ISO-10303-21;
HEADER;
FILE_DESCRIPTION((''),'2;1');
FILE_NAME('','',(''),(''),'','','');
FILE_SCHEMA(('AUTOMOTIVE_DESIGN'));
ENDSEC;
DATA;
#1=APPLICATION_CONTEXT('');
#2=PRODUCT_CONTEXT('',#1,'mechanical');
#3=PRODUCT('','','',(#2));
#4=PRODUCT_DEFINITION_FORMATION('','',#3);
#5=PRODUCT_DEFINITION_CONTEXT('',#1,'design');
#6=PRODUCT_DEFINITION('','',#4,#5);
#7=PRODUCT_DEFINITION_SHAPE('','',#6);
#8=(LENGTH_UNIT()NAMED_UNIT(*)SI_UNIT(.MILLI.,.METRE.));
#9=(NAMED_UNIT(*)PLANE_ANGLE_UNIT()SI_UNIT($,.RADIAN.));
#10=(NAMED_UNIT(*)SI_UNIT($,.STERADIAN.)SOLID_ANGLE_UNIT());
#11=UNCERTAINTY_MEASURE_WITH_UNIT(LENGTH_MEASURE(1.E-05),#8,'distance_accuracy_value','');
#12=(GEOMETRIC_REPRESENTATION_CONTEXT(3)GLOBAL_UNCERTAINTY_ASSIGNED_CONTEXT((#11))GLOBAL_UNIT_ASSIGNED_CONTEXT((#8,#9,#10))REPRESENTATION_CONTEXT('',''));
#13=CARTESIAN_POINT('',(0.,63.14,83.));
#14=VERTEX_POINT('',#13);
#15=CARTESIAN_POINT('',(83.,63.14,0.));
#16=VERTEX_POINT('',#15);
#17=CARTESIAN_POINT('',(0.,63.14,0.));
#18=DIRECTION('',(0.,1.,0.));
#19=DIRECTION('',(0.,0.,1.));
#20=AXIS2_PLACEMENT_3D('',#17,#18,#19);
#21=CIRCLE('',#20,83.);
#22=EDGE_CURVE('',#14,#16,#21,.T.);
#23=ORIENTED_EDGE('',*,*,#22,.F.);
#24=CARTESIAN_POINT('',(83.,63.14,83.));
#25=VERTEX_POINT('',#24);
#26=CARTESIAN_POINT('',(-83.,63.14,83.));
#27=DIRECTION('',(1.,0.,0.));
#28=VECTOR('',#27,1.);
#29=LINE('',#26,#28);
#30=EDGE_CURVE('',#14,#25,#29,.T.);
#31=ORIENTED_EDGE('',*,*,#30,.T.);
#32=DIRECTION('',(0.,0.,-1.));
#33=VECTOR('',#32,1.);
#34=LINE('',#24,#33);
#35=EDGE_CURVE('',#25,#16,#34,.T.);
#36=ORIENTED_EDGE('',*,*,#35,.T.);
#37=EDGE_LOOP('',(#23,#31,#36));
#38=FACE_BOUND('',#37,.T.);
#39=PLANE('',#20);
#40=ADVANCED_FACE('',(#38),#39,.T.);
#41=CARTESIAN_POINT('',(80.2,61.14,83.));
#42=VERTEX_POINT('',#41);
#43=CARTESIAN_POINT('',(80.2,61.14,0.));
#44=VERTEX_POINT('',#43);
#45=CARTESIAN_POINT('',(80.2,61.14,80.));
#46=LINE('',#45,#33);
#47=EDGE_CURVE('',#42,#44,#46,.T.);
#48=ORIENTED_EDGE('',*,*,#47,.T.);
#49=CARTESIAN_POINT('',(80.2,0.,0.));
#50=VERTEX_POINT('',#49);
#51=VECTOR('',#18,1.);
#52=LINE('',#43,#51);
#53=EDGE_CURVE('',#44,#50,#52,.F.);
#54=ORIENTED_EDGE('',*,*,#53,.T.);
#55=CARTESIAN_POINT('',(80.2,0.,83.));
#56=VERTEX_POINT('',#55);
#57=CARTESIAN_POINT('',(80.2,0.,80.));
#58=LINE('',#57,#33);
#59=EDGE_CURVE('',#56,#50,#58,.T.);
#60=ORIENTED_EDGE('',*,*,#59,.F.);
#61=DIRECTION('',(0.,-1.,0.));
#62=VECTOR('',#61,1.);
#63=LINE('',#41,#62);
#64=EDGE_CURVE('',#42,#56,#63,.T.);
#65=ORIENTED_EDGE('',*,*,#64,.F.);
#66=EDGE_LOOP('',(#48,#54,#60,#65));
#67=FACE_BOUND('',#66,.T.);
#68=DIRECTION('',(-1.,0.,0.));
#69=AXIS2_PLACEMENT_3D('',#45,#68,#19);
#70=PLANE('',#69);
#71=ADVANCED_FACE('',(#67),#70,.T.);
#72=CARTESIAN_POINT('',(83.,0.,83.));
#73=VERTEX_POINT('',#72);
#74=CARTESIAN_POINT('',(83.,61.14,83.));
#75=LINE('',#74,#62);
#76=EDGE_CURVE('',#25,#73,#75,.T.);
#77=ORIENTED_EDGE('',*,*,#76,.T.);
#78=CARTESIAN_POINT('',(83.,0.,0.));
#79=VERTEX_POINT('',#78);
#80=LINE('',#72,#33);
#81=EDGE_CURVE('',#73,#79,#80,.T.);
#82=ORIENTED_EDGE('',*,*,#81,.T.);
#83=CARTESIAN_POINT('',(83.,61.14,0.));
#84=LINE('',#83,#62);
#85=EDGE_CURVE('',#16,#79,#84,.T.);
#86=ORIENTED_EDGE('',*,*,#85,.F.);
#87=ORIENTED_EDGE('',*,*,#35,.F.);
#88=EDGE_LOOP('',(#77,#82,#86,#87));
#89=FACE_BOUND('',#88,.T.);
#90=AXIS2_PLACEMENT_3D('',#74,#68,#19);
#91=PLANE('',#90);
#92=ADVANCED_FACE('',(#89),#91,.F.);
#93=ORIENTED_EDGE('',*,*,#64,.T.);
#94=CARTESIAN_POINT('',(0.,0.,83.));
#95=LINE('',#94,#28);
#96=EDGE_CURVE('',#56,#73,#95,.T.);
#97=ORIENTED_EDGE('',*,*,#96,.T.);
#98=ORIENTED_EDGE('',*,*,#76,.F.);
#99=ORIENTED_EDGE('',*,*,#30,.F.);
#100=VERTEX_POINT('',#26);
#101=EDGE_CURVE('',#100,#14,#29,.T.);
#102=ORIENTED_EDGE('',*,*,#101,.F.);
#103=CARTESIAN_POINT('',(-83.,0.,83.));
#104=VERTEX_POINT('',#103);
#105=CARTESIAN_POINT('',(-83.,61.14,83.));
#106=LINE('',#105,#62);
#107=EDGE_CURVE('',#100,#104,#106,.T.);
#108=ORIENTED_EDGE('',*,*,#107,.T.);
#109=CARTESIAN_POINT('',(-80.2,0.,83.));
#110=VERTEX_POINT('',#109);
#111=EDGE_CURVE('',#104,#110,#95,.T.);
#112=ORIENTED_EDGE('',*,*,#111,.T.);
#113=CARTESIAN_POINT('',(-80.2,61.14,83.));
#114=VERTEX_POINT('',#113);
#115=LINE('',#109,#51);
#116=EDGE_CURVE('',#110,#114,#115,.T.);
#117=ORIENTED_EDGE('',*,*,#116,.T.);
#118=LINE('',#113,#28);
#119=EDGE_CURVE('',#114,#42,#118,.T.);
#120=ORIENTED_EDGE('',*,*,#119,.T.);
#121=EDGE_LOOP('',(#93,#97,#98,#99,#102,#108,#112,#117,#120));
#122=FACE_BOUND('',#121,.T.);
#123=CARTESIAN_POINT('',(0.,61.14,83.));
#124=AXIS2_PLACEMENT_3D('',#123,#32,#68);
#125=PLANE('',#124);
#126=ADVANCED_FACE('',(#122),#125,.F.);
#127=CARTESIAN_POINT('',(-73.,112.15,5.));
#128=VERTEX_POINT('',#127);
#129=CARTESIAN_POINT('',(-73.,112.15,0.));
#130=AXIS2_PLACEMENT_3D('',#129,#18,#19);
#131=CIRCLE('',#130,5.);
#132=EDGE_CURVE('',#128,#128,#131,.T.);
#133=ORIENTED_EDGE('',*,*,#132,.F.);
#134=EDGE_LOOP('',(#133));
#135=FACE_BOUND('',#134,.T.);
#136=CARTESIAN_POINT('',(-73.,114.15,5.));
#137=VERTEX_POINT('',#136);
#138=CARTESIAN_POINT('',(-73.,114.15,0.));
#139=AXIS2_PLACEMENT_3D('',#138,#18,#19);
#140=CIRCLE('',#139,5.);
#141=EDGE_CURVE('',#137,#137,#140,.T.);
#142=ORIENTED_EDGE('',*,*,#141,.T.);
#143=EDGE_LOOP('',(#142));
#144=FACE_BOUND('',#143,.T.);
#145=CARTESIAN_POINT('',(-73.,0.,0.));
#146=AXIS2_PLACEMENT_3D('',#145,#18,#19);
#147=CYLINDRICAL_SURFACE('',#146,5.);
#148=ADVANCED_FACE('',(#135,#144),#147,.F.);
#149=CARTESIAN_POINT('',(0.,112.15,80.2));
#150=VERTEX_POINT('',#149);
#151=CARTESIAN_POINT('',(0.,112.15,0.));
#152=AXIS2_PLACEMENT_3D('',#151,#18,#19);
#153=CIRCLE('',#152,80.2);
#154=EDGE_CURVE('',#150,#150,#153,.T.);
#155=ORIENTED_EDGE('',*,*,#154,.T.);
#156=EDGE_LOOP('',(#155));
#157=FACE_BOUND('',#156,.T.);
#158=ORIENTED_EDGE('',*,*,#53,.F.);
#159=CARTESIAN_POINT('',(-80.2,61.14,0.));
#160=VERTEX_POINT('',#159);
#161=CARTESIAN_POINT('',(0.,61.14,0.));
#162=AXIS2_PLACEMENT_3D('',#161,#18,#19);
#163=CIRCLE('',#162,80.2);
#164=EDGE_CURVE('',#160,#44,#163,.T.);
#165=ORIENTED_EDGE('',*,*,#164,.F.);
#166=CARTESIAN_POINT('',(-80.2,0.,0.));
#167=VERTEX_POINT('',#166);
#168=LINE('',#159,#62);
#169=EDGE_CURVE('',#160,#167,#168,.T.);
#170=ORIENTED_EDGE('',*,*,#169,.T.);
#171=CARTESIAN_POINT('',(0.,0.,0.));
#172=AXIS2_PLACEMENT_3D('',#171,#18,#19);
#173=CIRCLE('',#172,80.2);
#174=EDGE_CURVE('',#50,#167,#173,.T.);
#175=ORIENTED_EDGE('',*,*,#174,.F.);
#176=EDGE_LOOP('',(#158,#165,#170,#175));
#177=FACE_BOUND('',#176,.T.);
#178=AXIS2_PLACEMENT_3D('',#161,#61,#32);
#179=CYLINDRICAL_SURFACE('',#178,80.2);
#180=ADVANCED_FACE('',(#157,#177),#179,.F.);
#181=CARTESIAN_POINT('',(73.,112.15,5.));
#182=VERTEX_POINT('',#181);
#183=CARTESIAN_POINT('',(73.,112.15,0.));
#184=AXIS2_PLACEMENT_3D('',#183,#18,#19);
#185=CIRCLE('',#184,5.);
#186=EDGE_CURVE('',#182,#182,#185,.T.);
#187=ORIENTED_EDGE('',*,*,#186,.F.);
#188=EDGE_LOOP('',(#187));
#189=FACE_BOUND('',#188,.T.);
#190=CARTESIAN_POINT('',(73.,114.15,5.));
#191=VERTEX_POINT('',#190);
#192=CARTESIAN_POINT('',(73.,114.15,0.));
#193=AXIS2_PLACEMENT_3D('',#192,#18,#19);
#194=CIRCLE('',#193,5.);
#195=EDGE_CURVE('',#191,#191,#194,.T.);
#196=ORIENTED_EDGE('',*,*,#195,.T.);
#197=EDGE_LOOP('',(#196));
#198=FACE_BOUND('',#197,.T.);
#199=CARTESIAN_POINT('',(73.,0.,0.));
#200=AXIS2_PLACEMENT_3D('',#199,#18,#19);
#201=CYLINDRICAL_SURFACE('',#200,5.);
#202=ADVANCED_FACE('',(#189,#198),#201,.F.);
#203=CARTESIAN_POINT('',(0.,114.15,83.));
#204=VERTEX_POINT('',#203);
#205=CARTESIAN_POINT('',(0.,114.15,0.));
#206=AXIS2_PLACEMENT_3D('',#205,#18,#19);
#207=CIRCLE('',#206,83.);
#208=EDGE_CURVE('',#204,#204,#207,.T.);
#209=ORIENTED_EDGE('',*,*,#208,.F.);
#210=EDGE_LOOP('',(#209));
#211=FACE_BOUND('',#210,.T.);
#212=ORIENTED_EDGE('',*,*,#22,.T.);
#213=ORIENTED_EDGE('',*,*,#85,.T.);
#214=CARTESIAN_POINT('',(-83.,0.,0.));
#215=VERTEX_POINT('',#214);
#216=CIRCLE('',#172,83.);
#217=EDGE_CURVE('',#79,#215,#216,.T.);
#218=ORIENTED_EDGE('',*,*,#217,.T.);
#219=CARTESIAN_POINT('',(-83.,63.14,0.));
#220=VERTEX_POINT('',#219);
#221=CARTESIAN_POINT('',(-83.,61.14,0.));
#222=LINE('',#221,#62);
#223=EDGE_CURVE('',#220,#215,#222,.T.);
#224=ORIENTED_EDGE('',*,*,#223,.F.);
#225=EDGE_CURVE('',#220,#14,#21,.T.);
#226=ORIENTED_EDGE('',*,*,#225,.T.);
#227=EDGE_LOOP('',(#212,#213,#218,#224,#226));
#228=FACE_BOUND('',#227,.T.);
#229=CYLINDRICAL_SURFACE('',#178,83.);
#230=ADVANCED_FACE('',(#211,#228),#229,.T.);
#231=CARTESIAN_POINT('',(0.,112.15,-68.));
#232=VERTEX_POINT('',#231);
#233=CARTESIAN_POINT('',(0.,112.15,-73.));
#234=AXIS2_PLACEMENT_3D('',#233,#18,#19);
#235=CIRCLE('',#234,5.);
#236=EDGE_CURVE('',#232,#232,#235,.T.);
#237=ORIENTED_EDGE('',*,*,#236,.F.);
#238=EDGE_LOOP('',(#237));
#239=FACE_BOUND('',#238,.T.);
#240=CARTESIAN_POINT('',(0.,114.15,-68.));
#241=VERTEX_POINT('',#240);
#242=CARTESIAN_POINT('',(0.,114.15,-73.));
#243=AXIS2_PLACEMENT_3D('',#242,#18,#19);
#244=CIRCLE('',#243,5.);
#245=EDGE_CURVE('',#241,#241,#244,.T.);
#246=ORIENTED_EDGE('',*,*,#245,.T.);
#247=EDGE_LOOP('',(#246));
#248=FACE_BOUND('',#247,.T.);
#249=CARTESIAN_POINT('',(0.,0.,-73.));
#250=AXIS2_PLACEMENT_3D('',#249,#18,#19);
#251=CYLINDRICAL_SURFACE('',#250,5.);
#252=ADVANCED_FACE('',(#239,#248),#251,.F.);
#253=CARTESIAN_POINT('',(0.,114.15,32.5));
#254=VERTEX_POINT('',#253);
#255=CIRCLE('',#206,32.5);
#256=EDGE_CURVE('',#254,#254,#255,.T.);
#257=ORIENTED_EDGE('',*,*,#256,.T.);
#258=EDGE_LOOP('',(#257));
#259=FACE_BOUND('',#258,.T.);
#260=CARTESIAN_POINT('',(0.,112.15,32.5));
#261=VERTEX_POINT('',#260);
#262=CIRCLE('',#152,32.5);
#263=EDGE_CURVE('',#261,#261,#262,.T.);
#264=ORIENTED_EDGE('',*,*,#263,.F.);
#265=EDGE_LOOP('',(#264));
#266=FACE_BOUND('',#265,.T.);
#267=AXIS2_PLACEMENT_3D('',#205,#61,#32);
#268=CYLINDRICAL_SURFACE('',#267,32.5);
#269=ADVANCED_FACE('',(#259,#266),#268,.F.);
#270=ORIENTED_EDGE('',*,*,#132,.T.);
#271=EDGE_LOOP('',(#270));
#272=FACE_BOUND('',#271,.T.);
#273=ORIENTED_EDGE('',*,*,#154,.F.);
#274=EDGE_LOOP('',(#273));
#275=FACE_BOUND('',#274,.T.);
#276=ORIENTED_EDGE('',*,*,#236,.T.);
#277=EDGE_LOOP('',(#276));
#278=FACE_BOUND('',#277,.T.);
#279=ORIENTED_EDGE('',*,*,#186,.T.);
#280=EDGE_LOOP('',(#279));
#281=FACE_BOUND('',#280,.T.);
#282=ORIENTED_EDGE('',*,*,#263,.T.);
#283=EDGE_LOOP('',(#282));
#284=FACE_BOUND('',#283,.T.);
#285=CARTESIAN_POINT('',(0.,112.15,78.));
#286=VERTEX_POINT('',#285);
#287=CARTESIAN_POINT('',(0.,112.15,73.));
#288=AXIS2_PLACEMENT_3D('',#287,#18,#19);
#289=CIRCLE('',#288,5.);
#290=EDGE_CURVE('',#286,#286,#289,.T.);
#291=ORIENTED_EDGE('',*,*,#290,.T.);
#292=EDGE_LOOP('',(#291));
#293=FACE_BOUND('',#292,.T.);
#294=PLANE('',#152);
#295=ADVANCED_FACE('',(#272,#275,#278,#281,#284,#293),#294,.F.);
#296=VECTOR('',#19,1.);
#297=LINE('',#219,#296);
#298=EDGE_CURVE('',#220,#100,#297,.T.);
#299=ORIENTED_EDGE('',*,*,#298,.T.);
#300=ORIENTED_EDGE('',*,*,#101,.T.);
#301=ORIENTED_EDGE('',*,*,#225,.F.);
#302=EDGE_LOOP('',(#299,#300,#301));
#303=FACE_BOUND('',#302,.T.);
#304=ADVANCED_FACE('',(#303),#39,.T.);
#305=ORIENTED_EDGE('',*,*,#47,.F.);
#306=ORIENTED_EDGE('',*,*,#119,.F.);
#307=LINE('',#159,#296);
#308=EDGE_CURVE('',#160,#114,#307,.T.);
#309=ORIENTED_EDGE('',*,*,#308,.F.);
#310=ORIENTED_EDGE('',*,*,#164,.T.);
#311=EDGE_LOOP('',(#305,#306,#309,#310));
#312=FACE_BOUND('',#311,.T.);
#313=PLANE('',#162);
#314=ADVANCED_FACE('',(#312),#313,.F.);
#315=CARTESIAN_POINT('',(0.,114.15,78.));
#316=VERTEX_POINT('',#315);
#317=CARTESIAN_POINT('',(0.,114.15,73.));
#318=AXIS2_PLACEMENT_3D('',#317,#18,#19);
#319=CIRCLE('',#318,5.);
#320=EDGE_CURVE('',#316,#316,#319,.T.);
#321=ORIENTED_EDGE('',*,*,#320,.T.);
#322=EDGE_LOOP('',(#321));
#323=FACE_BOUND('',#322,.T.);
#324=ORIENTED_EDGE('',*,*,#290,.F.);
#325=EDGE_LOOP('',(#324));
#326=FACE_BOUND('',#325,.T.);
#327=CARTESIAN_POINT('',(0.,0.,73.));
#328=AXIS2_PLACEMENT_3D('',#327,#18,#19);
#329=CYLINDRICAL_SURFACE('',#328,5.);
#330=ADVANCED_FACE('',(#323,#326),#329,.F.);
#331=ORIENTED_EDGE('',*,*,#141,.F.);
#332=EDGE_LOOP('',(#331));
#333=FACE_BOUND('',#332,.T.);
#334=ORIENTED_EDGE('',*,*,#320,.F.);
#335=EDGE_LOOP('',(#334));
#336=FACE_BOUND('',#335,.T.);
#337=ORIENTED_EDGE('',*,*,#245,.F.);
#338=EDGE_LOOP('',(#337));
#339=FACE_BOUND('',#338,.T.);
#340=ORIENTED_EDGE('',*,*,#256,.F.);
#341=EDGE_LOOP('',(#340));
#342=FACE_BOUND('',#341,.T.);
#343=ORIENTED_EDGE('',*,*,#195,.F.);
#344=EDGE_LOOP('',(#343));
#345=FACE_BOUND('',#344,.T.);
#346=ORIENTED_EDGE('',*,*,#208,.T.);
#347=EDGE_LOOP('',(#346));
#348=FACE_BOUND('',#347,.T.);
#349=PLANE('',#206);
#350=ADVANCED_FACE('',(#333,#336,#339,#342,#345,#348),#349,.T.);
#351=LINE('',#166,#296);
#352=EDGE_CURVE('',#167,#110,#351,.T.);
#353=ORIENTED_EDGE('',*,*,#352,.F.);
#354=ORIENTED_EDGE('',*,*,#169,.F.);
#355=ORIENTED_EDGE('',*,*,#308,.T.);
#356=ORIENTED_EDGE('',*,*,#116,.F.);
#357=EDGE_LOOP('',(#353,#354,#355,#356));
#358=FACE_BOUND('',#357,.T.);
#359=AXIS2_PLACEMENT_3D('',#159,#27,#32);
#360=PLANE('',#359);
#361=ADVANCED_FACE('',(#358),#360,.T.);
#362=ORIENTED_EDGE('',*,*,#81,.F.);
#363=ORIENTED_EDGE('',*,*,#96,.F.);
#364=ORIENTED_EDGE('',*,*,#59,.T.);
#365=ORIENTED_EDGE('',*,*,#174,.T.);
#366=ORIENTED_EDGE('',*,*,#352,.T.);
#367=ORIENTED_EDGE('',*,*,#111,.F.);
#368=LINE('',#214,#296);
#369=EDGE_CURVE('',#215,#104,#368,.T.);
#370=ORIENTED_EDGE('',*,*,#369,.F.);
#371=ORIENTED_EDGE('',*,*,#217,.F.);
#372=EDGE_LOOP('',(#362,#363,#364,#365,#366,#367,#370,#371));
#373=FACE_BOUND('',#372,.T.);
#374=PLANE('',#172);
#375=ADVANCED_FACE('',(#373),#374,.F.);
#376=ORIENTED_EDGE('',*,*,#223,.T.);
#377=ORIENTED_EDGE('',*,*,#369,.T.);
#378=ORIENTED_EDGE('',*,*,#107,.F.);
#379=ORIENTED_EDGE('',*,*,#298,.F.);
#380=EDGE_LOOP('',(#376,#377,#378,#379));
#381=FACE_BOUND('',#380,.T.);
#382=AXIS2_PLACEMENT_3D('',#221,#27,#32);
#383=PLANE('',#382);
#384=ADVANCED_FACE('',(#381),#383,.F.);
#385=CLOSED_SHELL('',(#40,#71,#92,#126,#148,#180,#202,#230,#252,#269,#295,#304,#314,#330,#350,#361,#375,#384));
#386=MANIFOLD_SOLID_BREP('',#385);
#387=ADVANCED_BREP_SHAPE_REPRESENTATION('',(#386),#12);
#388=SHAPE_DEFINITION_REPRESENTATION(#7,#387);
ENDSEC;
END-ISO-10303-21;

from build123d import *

# Parameters (mm, degrees)
BOSS_EXTRUDE1_DEPTH      = 61.14
SKETCH2_R                = 80
BOSS_EXTRUDE2_DEPTH      = 2
SKETCH3_R                = 83
SKETCH3_R_2              = 80
BOSS_EXTRUDE3_DEPTH      = 49.01
SKETCH6_R                = 83
SKETCH6_R_2              = 32.5
BOSS_EXTRUDE4_DEPTH      = 2
MOVE_START               = -80.2
MOVE_FACE1_OUTLINE_W     = 61.14
MOVE_FACE1_OUTLINE_H     = 0.2
MOVE_FACE1_DEPTH         = 160.4
MOVE_FACE1_2_OUTLINE_R   = 80.2
MOVE_FACE1_2_OUTLINE_R_2 = 80
MOVE_FACE1_2_DEPTH       = 112.15
MOVE_FACE1_3_DEPTH       = 61.14
SKETCH7_R                = 5
CUT_EXTRUDE1_DEPTH       = 164.732166968
CUT_EXTRUDE2_DEPTH       = 216.762514121


with BuildPart() as part:
    # Sketch1 → Boss-Extrude1 (new body)
    with BuildSketch(Plane(origin=(0, 0, 0), x_dir=(1, 0, 0), z_dir=(0, 1, 0))):
        with BuildLine():
            Line((0, -83), (83, -83))
            Line((83, -83), (83, 0))
            ThreePointArc((83, 0), (0, 83), (-83, 0))
            Line((-83, 0), (-83, -83))
            Line((-83, -83), (0, -83))
        make_face()
        with BuildLine():
            Line((-80, 0), (-80, -80))
            Line((-80, -80), (0, -80))
            Line((0, -80), (80, -80))
            Line((80, -80), (80, 0))
            ThreePointArc((80, 0), (0, 80), (-80, 0))
        make_face(mode=Mode.SUBTRACT)
    extrude(amount=BOSS_EXTRUDE1_DEPTH)

    # Sketch2 → Boss-Extrude2 (add)
    with BuildSketch(Plane(origin=(0, 61.14, 0), x_dir=(1, 0, 0), z_dir=(0, 1, 0))):
        with BuildLine():
            Line((-83, -83), (83, -83))
            Line((83, -83), (83, 0))
            ThreePointArc((83, 0), (0, 83), (-83, 0))
            Line((-83, 0), (-83, -83))
        make_face()
        with Locations(Location((0, 0, 0), (0, 0, 270))):
            Circle(SKETCH2_R, mode=Mode.SUBTRACT)
    extrude(amount=BOSS_EXTRUDE2_DEPTH)

    # Sketch3 → Boss-Extrude3 (add)
    with BuildSketch(Plane(origin=(0, 63.14, 0), x_dir=(1, 0, 0), z_dir=(0, 1, 0))):
        with Locations(Location((0, 0, 0), (0, 0, 270))):
            Circle(SKETCH3_R)
        with Locations(Location((0, 0, 0), (0, 0, 270))):
            Circle(SKETCH3_R_2, mode=Mode.SUBTRACT)
    extrude(amount=BOSS_EXTRUDE3_DEPTH)

    # Sketch6 → Boss-Extrude4 (add)
    with BuildSketch(Plane(origin=(0, 112.15, 0), x_dir=(1, 0, 0), z_dir=(0, 1, 0))):
        with Locations(Location((0, 0, 0), (0, 0, 270))):
            Circle(SKETCH6_R)
        with Locations(Location((0, 0, 0), (0, 0, 270))):
            Circle(SKETCH6_R_2, mode=Mode.SUBTRACT)
    extrude(amount=BOSS_EXTRUDE4_DEPTH)

    # Move Face1: read off the stored shape, not the designer's step
    # Move Face1 outline → Move Face1 (cut)
    with BuildSketch(Plane.YZ.offset(MOVE_START)):
        with Locations((30.57, 80.1)):
            Rectangle(MOVE_FACE1_OUTLINE_W, MOVE_FACE1_OUTLINE_H)
    extrude(amount=MOVE_FACE1_DEPTH, mode=Mode.SUBTRACT)

    # Move Face1 2 outline → Move Face1 2 (cut)
    with BuildSketch(Plane(origin=(0, 0, 0), x_dir=(1, 0, 0), z_dir=(0, 1, 0))):
        Circle(MOVE_FACE1_2_OUTLINE_R)
        Circle(MOVE_FACE1_2_OUTLINE_R_2, mode=Mode.SUBTRACT)
    extrude(amount=MOVE_FACE1_2_DEPTH, mode=Mode.SUBTRACT)

    # Move Face1 3 outline → Move Face1 3 (cut)
    with BuildSketch(Plane(origin=(0, 0, 0), x_dir=(1, 0, 0), z_dir=(0, 1, 0))):
        with BuildLine():
            Line((80.2, -80), (80.2, 0))
            ThreePointArc((80.2, 0), (80.149984404, -2.831960452), (80, -5.660388679))
            Line((80, -5.660388679), (80, -80))
            Line((80, -80), (80.2, -80))
        make_face()
        with BuildLine():
            ThreePointArc((-80, -5.660388679), (-80.149984404, -2.831960452), (-80.2, 0))
            Line((-80.2, 0), (-80.2, -80))
            Line((-80.2, -80), (-80, -80))
            Line((-80, -80), (-80, -5.660388679))
        make_face()
    extrude(amount=MOVE_FACE1_3_DEPTH, mode=Mode.SUBTRACT)

    # Sketch7 → Cut-Extrude1 (cut, through all)
    with BuildSketch(Plane(origin=(0, 114.15, 0), x_dir=(1, 0, 0), z_dir=(0, 1, 0))):
        with Locations(Location((0, 73, 0), (0, 0, 270))):
            Circle(SKETCH7_R)
        with Locations(Location((73, 0, 0), (0, 0, 270))):
            Circle(SKETCH7_R)
        with Locations(Location((0, -73, 0), (0, 0, 270))):
            Circle(SKETCH7_R)
        with Locations(Location((-73, 0, 0), (0, 0, 270))):
            Circle(SKETCH7_R)
    extrude(amount=-CUT_EXTRUDE1_DEPTH, mode=Mode.SUBTRACT)

    # Sketch8 → Cut-Extrude2 (cut, through all)
    with BuildSketch(Plane(origin=(0, 0, 80.2), x_dir=(-1, 0, 0), z_dir=(0, 0, -1))):
        Polygon((-80.2, 0), (80.2, 0), (80.2, 61.14), (0, 61.14), (-80.2, 61.14), align=None)
    extrude(amount=-CUT_EXTRUDE2_DEPTH, mode=Mode.SUBTRACT)


solid = part.part
